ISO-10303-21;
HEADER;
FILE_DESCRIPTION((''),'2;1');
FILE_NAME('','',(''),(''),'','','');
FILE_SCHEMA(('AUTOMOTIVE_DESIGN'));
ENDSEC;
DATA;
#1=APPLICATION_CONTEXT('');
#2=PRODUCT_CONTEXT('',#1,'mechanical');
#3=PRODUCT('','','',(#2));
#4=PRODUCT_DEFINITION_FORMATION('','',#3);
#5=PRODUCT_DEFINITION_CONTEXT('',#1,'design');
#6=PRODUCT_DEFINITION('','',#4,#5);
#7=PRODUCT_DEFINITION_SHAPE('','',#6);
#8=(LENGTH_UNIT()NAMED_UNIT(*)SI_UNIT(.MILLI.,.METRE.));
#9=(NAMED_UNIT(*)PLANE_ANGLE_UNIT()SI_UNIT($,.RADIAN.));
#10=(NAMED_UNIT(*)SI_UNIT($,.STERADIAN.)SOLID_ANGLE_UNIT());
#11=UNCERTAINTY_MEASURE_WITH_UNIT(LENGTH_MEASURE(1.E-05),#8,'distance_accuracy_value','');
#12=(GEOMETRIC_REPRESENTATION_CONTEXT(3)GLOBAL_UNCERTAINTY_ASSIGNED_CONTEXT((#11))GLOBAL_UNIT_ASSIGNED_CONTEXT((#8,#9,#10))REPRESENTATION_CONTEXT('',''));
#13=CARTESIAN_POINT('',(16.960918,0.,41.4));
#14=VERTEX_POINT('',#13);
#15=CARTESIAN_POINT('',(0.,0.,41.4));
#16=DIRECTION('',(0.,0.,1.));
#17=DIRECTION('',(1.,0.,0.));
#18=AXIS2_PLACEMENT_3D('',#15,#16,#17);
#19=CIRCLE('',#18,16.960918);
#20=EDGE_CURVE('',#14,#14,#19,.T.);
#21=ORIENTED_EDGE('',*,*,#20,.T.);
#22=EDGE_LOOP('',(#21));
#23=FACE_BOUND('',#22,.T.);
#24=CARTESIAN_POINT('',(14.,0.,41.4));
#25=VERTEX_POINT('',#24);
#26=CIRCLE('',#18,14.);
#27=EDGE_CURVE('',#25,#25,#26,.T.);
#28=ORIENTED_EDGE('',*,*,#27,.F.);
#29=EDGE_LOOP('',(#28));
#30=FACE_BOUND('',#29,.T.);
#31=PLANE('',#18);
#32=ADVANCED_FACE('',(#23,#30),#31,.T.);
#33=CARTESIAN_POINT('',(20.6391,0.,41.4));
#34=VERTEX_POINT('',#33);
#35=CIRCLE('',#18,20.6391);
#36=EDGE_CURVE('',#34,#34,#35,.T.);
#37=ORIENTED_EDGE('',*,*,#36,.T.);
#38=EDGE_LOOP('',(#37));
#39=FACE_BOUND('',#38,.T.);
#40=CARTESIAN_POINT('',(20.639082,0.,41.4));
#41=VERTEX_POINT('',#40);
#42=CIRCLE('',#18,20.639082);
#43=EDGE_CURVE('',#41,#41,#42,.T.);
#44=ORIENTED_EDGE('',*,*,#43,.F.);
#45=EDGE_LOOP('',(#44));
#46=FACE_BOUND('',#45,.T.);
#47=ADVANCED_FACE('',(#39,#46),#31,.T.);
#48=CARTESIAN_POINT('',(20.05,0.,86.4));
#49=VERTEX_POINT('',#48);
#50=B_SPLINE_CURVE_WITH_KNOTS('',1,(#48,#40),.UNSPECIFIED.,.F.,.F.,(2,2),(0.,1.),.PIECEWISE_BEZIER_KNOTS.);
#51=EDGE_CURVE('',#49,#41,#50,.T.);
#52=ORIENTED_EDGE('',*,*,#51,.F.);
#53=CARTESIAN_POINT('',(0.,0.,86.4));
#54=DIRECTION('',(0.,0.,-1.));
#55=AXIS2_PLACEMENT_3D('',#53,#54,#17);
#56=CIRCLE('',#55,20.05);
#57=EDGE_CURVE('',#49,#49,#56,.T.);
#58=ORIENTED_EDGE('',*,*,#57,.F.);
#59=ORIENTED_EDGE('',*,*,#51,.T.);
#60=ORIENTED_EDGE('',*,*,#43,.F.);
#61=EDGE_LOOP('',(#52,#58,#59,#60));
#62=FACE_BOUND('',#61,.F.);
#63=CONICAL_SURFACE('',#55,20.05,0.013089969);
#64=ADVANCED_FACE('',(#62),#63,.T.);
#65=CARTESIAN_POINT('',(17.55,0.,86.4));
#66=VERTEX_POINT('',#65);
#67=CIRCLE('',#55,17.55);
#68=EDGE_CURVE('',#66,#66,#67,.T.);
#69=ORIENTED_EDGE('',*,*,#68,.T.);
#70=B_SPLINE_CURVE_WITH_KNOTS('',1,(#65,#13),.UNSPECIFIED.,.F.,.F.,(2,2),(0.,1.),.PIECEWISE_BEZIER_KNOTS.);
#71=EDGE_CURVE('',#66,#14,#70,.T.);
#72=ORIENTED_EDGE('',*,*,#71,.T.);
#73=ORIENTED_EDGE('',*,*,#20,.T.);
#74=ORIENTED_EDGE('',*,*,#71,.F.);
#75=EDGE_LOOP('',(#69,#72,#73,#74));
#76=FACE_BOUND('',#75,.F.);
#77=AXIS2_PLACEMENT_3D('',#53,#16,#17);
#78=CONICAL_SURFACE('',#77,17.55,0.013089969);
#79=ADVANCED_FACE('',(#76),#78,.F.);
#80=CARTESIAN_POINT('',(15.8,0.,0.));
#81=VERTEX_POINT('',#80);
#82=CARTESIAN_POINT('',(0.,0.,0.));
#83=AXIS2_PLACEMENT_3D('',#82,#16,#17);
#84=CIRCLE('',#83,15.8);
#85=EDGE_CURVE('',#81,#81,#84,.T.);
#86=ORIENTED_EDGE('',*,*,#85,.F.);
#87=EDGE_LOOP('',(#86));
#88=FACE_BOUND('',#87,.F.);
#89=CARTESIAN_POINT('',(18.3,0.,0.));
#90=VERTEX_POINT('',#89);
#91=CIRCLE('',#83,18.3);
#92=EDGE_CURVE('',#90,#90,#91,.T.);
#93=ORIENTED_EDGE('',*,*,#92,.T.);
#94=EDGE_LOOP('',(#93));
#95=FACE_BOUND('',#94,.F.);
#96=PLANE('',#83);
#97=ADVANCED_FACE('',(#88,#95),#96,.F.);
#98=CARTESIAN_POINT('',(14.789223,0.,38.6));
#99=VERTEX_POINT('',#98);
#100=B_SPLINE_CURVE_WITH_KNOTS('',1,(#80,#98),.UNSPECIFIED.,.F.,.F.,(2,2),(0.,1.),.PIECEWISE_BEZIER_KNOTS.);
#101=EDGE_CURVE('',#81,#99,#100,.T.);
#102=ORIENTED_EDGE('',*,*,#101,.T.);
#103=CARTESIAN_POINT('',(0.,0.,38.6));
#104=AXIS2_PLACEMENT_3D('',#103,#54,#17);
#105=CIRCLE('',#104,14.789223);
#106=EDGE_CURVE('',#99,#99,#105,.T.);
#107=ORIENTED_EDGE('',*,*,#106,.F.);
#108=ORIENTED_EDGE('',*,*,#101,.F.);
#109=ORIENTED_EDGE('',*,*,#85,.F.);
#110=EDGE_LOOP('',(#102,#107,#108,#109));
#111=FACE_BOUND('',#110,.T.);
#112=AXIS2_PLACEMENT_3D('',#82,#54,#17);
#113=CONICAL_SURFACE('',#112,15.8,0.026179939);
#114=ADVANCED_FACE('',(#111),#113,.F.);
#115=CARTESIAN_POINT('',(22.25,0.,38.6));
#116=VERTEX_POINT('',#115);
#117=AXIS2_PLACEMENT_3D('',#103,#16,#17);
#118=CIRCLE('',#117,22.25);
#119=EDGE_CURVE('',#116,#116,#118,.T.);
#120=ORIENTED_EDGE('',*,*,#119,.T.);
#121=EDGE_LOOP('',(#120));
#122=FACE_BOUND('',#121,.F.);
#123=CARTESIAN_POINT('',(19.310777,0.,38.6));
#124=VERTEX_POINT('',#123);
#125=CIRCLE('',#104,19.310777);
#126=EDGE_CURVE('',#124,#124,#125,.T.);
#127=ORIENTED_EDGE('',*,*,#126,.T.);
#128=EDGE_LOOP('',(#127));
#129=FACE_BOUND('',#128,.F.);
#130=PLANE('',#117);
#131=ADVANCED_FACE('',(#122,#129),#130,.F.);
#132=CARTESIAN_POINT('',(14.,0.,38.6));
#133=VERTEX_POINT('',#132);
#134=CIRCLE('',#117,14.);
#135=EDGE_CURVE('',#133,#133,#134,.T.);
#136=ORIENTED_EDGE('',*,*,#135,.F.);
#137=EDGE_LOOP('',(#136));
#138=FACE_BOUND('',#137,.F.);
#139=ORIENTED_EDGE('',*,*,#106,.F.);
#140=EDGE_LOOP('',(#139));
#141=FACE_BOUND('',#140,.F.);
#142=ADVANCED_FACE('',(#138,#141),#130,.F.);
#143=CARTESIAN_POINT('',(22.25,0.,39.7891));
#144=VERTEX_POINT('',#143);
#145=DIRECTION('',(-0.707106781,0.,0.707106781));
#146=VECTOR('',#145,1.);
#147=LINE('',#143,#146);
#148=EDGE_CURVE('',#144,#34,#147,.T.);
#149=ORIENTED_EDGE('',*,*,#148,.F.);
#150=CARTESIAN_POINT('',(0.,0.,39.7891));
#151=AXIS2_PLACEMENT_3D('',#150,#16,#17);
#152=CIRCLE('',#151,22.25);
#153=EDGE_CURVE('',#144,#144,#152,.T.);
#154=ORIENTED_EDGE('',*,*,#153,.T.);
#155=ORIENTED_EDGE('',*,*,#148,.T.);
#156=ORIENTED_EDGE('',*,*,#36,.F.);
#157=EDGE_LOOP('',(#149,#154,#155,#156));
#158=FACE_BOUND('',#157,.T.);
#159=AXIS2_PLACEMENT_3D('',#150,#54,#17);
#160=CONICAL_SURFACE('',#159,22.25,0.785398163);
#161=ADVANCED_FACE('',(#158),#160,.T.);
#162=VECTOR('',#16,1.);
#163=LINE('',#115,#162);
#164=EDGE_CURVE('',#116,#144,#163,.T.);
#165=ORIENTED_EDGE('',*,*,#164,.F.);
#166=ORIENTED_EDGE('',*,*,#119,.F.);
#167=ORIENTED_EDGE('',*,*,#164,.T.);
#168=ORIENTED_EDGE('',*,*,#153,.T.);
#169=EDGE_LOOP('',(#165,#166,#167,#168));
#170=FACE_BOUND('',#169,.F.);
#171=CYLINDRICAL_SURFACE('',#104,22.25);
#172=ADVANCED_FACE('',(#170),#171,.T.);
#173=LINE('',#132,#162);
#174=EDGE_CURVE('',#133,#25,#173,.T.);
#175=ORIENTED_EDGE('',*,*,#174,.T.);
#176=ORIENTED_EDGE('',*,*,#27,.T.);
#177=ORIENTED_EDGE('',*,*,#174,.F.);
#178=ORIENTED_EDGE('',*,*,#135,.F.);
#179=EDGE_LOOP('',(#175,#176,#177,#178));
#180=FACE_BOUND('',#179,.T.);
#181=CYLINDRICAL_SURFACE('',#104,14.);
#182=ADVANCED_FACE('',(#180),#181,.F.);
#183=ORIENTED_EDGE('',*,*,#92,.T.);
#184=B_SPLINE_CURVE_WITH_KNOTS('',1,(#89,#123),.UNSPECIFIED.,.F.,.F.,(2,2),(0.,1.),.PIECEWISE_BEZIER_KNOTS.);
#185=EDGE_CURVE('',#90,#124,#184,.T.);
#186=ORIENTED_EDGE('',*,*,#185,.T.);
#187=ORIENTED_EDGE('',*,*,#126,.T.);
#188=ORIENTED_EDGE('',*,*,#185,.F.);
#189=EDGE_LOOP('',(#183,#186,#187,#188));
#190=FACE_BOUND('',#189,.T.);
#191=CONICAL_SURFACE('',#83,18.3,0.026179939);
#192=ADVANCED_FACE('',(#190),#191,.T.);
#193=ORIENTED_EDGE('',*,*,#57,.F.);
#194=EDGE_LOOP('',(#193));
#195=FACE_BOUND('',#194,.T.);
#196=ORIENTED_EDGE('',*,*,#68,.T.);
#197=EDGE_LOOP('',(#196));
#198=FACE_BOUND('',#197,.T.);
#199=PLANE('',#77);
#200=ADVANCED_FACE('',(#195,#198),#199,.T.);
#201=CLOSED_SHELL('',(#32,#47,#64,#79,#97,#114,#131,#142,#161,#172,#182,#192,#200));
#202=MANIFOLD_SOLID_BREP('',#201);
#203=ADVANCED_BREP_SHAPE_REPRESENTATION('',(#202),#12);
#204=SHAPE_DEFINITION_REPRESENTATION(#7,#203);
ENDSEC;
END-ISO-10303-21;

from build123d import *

# Parameters (mm, degrees)
F0_R      = 17.5
F0_R_2    = 15
F1_DEPTH  = 38.6
F1_TAPER  = -1.5
F2_R      = 22.25
F2_R_2    = 18.5107765726
F2_R_3    = 14
F3_DEPTH  = 2.8
F5_R      = 20.05
F5_R_2    = 17.55
F6_DEPTH  = 45
F6_TAPER  = -0.75
F7_SIZE   = 1.6109
F8_R      = 31.610490496
F9_DEPTH  = 38.6
F10_R     = 18.3
F10_R_2   = 15.8
F11_DEPTH = 38.6
F11_TAPER = -1.5


# Not quite as in the source:
# - a fillet or chamfer is up to 0.001 mm smaller than in the source, because OpenCascade refuses the exact size


with BuildPart() as f1:
    # F0 (on Top) → F1 (new body)
    with BuildSketch(Plane.XY):
        Circle(F0_R)
        Circle(F0_R_2, mode=Mode.SUBTRACT)
    extrude(amount=F1_DEPTH, taper=F1_TAPER)

    # F2 (on face) → F3 (join)
    with BuildSketch(Plane.XY.offset(38.6)):
        Circle(F2_R)
        Circle(F2_R_2, mode=Mode.SUBTRACT)
        Circle(F2_R_2)
        Circle(F2_R_3, mode=Mode.SUBTRACT)
    extrude(amount=F3_DEPTH)

    # F5 (on offset) → F6 (join, through all)
    with BuildSketch(Plane.XY.offset(86.4)):
        Circle(F5_R)
        Circle(F5_R_2, mode=Mode.SUBTRACT)
    extrude(amount=-F6_DEPTH, taper=F6_TAPER)

    # F7 (size 1.611 in the source; OpenCascade refuses exactly that, so slightly less here)
    f7_edges = [f1.edges().sort_by_distance(p)[0] for p in [
        (-22.25, 0, 41.4),
    ]]
    chamfer(f7_edges, length=F7_SIZE)

    # F8 (on Top) → F9 (cut, through all)
    with BuildSketch(Plane.XY):
        Circle(F8_R)
    extrude(amount=F9_DEPTH, mode=Mode.SUBTRACT)

    # F10 (on Top) → F11 (join, through all)
    with BuildSketch(Plane.XY):
        Circle(F10_R)
        Circle(F10_R_2, mode=Mode.SUBTRACT)
    extrude(amount=F11_DEPTH, taper=F11_TAPER)


solid = f1.part
